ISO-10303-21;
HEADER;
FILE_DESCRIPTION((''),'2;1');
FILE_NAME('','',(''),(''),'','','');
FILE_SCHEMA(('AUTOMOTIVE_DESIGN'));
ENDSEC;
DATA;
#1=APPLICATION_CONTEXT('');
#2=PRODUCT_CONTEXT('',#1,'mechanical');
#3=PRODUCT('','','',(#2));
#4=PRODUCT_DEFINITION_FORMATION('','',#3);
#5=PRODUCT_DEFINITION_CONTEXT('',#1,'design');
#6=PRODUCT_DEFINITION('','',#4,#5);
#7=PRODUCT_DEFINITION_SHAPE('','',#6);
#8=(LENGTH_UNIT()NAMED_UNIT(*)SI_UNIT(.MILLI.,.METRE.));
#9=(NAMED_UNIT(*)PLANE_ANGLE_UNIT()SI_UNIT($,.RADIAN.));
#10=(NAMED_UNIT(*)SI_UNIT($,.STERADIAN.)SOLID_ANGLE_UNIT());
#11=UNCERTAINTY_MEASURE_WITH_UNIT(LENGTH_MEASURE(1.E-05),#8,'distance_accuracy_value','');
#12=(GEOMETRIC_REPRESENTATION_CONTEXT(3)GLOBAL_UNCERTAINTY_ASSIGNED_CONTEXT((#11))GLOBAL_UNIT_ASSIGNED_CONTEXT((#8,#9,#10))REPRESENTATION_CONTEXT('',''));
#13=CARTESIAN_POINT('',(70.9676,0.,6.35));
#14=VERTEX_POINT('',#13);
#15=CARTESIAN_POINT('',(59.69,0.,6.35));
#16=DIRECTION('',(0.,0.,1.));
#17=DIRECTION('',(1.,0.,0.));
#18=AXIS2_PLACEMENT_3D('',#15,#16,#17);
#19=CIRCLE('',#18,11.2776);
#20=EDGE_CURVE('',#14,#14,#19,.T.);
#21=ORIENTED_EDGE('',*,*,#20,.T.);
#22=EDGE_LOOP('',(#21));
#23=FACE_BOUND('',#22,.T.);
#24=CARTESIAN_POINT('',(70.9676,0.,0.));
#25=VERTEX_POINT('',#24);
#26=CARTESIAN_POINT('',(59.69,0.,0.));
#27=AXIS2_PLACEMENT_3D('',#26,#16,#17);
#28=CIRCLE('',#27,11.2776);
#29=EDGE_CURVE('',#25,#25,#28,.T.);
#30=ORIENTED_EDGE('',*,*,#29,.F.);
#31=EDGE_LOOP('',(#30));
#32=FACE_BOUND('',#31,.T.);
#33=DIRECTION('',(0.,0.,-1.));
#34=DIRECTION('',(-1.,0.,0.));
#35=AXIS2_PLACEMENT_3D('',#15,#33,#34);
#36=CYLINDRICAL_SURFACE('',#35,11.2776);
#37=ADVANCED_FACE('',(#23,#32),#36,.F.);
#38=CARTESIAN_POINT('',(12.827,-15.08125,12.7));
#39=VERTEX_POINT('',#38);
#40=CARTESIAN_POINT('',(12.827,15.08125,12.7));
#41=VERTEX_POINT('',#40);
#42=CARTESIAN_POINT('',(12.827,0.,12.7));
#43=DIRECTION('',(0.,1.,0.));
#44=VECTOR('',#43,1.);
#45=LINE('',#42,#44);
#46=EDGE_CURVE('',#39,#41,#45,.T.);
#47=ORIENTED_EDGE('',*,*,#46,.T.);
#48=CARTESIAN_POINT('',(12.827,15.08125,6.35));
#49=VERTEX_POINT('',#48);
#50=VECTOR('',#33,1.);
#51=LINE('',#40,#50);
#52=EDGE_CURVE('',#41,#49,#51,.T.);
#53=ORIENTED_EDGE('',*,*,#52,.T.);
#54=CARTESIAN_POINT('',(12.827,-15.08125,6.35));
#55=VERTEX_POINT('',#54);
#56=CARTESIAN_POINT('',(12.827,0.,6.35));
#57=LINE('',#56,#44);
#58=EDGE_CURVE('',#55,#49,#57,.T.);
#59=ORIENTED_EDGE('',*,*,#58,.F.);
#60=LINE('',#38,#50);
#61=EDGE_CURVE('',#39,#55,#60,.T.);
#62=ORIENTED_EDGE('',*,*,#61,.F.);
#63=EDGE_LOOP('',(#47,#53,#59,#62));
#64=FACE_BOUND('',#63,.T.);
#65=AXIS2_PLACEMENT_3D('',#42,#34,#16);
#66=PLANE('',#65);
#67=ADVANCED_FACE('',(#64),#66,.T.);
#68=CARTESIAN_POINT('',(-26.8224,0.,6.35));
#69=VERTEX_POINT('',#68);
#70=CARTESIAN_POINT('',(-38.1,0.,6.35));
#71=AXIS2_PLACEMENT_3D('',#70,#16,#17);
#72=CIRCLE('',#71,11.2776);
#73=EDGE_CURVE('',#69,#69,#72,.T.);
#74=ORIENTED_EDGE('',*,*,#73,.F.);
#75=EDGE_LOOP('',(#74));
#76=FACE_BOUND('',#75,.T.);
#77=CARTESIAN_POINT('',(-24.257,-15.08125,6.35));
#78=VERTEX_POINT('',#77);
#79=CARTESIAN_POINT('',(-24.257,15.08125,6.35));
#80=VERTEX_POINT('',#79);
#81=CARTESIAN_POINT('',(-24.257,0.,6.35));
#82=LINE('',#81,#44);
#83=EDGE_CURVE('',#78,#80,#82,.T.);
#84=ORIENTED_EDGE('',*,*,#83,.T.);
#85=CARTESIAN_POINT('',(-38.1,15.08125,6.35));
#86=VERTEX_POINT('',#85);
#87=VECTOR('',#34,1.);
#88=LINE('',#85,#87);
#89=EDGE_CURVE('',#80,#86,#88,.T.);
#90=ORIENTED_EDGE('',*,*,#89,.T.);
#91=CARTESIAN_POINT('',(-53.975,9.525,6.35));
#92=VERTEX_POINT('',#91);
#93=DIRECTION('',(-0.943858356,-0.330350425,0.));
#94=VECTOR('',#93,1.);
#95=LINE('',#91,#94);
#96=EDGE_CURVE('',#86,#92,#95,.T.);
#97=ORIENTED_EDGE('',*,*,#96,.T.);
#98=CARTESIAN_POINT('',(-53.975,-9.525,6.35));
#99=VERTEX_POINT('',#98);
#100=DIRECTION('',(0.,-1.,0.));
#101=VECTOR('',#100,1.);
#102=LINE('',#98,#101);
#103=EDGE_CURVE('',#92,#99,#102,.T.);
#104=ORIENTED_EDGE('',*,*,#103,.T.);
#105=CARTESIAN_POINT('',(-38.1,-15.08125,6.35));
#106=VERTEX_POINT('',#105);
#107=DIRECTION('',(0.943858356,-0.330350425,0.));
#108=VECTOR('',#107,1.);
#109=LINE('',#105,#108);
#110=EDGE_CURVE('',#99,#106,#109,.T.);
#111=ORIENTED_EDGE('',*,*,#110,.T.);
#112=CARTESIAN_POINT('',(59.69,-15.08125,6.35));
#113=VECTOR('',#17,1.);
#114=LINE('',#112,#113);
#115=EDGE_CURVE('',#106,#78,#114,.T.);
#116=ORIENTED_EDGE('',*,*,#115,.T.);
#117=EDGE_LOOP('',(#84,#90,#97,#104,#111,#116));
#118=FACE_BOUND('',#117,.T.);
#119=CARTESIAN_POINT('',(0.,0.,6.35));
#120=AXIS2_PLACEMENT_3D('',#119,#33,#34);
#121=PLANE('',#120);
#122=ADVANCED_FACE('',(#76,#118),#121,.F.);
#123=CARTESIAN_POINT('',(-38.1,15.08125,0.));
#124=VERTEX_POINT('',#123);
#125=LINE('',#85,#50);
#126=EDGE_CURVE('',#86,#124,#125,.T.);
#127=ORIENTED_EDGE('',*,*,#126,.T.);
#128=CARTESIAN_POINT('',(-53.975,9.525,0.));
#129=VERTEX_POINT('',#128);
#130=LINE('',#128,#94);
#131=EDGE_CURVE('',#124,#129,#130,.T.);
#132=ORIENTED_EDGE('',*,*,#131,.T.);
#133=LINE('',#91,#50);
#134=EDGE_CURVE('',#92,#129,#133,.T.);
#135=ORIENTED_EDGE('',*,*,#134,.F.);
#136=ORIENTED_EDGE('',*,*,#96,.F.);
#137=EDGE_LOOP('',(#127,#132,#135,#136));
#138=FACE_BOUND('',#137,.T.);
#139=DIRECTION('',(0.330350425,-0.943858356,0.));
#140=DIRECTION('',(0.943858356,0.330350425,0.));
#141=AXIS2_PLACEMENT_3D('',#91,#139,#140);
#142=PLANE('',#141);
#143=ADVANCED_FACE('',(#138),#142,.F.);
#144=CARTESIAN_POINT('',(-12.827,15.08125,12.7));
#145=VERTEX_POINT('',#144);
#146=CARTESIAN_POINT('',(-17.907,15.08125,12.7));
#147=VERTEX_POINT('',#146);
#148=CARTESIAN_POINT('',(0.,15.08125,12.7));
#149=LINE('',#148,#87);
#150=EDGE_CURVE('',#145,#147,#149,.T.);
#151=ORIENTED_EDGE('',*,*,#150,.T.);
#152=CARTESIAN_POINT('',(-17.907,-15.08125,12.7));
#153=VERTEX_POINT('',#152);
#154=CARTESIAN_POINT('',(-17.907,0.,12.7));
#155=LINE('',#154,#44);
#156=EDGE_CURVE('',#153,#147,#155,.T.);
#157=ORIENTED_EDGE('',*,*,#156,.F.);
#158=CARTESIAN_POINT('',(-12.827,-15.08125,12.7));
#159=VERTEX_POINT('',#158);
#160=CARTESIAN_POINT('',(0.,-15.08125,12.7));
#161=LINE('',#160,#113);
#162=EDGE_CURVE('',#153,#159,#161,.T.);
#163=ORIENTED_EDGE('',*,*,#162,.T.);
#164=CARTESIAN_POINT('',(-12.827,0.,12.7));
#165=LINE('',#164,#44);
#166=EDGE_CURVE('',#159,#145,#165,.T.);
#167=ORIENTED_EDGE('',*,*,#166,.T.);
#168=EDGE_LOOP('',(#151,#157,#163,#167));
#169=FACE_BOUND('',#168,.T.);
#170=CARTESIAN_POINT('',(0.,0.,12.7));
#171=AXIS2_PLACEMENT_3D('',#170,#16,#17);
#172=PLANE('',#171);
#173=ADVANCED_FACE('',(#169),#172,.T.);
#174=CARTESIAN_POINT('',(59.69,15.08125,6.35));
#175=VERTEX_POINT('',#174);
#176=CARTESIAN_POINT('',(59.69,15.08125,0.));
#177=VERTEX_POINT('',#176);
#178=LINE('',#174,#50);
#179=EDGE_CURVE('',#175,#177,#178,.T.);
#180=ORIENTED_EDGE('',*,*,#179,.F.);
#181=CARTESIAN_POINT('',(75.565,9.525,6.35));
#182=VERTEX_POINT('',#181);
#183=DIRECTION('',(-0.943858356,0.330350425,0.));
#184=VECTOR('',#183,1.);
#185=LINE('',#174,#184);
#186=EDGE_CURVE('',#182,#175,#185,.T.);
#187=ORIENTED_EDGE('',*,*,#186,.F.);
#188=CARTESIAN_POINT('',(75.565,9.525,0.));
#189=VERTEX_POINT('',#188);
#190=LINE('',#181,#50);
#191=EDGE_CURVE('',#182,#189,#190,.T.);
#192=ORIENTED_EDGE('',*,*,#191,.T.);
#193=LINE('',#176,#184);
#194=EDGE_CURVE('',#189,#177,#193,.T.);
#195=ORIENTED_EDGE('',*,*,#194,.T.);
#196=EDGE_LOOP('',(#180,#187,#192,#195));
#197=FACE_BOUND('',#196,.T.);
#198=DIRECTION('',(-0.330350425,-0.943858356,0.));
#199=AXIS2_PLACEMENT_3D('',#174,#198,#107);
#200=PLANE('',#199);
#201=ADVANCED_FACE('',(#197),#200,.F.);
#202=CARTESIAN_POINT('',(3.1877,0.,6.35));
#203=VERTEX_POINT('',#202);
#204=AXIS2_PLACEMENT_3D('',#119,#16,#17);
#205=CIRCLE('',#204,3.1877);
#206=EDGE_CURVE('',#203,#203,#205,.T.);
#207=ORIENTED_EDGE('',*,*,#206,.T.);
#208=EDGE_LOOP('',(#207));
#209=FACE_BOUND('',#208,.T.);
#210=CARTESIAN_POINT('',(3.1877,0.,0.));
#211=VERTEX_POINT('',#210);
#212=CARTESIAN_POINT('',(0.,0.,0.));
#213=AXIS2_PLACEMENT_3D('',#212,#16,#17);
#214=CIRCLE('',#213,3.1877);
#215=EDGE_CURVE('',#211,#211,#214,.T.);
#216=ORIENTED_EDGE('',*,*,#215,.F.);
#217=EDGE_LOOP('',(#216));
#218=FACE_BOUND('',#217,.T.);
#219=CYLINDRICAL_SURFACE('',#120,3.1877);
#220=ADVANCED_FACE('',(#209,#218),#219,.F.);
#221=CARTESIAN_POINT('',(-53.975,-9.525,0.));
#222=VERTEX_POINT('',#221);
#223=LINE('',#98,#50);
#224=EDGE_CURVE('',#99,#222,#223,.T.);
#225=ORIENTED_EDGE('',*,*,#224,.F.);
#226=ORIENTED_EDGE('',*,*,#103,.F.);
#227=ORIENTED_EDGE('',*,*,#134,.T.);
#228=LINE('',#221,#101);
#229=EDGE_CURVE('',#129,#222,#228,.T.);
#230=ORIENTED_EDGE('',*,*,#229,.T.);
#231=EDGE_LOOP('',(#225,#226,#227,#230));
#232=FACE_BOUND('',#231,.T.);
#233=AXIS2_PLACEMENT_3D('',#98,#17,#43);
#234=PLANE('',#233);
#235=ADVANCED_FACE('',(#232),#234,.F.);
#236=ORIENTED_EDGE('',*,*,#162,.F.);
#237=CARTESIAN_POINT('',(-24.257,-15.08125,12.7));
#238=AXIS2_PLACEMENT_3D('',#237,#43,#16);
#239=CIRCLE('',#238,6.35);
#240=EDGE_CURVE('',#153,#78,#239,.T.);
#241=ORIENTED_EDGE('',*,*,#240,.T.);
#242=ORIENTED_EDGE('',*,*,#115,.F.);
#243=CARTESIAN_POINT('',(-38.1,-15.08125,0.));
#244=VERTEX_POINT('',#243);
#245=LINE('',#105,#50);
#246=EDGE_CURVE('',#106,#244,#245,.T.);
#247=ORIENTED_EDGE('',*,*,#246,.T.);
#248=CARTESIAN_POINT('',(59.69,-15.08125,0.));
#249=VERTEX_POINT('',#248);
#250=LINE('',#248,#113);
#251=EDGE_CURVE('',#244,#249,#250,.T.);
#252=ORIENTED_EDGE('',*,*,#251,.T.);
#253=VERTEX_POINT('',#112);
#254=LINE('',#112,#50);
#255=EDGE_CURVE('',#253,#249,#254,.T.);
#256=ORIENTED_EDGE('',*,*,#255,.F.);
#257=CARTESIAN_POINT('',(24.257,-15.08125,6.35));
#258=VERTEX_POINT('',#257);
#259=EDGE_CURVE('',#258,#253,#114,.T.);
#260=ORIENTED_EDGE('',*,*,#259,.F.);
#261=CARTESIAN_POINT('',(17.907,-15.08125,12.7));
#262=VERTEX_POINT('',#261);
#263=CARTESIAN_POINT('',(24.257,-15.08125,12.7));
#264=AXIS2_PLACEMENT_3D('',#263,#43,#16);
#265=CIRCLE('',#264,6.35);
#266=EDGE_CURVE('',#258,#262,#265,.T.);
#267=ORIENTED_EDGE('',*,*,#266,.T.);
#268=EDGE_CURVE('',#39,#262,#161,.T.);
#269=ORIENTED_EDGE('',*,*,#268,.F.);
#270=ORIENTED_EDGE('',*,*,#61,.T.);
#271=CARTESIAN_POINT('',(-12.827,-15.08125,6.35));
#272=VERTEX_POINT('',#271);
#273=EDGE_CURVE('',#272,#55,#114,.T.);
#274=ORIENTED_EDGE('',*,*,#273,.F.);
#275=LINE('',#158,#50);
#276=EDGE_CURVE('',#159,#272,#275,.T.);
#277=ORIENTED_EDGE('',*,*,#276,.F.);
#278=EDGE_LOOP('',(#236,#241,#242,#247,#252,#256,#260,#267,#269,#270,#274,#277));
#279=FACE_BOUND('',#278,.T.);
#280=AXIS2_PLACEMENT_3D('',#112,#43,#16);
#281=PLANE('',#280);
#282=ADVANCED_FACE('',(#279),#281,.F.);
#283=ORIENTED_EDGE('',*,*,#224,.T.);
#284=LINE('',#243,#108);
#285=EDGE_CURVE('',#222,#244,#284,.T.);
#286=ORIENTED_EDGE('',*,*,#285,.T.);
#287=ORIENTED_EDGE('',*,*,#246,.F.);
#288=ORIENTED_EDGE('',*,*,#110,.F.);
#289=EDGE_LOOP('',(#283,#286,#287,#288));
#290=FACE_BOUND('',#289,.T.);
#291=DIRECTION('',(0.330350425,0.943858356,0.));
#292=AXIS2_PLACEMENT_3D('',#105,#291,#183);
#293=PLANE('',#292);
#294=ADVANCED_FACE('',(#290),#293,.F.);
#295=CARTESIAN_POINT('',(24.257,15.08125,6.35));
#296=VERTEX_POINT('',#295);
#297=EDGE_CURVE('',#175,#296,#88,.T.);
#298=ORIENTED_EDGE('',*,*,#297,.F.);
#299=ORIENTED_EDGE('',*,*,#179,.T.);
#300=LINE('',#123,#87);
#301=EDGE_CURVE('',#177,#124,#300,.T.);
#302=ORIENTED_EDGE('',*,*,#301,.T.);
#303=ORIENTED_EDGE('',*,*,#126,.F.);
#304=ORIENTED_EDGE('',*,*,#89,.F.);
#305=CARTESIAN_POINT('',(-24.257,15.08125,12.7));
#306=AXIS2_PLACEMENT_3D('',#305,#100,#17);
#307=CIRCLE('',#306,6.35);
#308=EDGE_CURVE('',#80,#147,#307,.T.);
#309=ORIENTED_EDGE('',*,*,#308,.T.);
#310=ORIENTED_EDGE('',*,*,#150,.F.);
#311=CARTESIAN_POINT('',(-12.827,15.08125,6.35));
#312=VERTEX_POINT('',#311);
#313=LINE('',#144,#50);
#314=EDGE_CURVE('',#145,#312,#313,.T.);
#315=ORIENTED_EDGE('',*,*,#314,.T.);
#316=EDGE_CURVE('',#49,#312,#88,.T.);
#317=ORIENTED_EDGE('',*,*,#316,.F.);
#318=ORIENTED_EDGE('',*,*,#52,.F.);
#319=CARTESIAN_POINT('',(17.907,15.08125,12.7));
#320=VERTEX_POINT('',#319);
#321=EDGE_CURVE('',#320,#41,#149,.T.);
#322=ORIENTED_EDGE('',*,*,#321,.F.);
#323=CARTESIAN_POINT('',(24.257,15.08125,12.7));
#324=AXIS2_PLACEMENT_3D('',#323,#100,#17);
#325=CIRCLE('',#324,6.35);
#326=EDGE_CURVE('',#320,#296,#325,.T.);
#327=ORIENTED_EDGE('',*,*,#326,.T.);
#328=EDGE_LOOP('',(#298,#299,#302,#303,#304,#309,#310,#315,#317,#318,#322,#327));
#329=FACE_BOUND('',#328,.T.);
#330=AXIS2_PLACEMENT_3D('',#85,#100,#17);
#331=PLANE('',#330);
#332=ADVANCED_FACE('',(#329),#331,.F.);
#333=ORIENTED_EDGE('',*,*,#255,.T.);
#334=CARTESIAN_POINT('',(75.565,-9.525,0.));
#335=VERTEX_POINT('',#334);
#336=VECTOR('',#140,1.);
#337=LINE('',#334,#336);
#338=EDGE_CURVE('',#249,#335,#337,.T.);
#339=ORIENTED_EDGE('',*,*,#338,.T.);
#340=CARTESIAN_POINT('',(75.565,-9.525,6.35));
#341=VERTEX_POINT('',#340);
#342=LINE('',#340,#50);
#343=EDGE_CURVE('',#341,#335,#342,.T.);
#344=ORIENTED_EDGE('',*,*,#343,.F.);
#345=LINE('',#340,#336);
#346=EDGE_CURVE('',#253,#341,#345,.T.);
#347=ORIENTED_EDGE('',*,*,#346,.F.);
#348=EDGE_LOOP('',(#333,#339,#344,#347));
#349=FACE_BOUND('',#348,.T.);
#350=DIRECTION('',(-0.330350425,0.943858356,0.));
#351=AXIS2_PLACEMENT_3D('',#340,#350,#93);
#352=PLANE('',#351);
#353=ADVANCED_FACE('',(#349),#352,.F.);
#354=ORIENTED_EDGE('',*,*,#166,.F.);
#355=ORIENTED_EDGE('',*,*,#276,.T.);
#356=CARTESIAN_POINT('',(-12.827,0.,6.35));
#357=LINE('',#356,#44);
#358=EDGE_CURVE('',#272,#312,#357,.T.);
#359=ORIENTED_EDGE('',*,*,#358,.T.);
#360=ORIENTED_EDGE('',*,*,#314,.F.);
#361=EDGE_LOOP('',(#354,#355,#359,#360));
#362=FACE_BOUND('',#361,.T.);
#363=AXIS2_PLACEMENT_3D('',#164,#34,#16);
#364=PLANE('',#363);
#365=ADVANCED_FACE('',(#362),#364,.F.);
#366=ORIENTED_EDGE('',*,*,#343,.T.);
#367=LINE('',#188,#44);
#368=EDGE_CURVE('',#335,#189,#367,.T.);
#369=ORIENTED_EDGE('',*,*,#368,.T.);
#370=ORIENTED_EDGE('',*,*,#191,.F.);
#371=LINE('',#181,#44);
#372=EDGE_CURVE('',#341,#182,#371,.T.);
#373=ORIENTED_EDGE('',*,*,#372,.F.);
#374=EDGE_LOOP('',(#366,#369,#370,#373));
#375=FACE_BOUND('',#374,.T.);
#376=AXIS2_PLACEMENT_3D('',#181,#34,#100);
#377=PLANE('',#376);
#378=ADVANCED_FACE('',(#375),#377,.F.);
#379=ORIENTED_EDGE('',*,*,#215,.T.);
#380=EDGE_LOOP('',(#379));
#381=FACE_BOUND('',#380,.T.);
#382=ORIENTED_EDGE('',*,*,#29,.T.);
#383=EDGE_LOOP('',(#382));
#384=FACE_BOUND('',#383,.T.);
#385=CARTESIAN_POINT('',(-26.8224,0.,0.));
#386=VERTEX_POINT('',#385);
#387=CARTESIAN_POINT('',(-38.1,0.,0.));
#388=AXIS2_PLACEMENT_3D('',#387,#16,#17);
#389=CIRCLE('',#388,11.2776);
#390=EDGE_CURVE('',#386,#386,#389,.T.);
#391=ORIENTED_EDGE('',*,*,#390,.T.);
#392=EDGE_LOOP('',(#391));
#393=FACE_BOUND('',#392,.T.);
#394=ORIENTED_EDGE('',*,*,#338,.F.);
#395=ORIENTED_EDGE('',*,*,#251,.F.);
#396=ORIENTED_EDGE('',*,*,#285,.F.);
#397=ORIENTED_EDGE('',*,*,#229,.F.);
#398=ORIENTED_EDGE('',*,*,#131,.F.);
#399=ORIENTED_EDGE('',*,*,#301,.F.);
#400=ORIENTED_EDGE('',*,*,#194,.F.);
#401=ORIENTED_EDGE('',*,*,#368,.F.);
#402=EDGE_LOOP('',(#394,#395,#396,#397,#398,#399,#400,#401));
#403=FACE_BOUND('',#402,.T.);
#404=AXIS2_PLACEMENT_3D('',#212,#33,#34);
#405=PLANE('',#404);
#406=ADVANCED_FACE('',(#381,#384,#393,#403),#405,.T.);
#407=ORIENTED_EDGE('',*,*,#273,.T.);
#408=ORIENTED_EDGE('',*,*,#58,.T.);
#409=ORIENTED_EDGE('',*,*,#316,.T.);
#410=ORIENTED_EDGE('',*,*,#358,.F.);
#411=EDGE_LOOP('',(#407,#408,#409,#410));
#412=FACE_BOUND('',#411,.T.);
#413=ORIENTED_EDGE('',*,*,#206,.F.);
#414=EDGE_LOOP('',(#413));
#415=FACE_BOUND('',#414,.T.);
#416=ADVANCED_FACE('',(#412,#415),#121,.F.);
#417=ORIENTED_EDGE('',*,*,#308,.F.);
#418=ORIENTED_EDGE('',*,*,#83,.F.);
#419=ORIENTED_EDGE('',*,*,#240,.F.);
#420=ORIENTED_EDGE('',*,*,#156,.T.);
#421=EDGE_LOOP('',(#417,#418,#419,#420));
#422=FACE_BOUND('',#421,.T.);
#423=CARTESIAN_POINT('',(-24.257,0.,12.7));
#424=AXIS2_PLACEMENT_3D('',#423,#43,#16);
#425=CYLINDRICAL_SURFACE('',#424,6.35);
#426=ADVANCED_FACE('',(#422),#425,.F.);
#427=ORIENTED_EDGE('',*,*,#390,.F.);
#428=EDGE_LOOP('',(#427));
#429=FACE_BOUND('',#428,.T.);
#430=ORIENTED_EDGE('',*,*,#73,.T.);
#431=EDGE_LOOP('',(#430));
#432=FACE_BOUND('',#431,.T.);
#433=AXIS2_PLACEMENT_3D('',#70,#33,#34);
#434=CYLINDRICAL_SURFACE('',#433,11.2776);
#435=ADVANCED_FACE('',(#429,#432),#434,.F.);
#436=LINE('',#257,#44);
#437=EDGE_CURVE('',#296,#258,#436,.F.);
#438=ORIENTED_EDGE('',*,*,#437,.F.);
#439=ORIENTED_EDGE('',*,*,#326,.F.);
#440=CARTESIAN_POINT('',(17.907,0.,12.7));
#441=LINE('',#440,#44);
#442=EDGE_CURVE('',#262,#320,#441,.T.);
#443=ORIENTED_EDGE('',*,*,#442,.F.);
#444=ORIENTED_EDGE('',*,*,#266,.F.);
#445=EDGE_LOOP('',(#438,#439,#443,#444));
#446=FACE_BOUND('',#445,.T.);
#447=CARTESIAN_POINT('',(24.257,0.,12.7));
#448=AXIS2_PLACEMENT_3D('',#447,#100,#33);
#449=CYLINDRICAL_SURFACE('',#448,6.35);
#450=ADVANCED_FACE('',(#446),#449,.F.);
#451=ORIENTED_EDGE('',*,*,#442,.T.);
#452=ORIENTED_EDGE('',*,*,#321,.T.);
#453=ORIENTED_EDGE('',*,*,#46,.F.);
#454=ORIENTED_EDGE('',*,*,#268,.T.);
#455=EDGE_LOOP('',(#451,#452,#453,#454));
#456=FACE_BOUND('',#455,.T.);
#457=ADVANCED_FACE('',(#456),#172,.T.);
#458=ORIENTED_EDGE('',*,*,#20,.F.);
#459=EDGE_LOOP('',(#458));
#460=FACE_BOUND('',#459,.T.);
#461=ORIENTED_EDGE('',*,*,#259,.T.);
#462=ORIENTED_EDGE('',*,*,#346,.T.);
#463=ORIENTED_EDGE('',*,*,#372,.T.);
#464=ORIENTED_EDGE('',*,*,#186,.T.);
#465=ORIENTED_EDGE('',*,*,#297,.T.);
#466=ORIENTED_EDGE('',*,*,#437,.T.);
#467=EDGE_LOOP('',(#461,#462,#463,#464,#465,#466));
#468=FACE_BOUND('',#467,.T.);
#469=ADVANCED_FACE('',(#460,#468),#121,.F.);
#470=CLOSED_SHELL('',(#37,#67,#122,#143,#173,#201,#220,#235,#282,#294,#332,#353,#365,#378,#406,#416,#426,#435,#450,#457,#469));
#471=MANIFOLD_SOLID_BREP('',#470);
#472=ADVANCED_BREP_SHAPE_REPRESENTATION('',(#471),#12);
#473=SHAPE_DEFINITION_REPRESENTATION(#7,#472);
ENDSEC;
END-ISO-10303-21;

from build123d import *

# Parameters (mm, degrees)
SKETCH1_R           = 3.1877
SKETCH1_R_2         = 11.2776
BOSS_EXTRUDE1_DEPTH = 6.35
SKETCH2_W           = 5.08
SKETCH2_H           = 30.1625
BOSS_EXTRUDE2_DEPTH = 6.35
FILLET1_R           = 6.35


with BuildPart() as part:
    # Sketch1 → Boss-Extrude1 (new body)
    with BuildSketch(Plane.XY):
        Polygon((-38.1, 15.08125), (59.69, 15.08125), (75.565, 9.525), (75.565, -9.525), (59.69, -15.08125), (-38.1, -15.08125), (-53.975, -9.525), (-53.975, 9.525), align=None)
        Circle(SKETCH1_R, mode=Mode.SUBTRACT)
        with Locations((-38.1, 0)):
            Circle(SKETCH1_R_2, mode=Mode.SUBTRACT)
        with Locations((59.69, 0)):
            Circle(SKETCH1_R_2, mode=Mode.SUBTRACT)
    extrude(amount=BOSS_EXTRUDE1_DEPTH)

    # Sketch2 → Boss-Extrude2 (add)
    with BuildSketch(Plane.XY.offset(6.35)):
        with Locations((-15.367, 0)):
            Rectangle(SKETCH2_W, SKETCH2_H)
        with Locations((15.367, 0)):
            Rectangle(SKETCH2_W, SKETCH2_H)
    extrude(amount=BOSS_EXTRUDE2_DEPTH)

    # Fillet1
    fillet1_edges = [part.edges().sort_by_distance(p)[0] for p in [
        (-17.907, 0, 6.35),
        (17.907, 0, 6.35),
    ]]
    fillet(fillet1_edges, radius=FILLET1_R - 0.0001)  # a hair under: the kernel refuses the full size


solid = part.part
